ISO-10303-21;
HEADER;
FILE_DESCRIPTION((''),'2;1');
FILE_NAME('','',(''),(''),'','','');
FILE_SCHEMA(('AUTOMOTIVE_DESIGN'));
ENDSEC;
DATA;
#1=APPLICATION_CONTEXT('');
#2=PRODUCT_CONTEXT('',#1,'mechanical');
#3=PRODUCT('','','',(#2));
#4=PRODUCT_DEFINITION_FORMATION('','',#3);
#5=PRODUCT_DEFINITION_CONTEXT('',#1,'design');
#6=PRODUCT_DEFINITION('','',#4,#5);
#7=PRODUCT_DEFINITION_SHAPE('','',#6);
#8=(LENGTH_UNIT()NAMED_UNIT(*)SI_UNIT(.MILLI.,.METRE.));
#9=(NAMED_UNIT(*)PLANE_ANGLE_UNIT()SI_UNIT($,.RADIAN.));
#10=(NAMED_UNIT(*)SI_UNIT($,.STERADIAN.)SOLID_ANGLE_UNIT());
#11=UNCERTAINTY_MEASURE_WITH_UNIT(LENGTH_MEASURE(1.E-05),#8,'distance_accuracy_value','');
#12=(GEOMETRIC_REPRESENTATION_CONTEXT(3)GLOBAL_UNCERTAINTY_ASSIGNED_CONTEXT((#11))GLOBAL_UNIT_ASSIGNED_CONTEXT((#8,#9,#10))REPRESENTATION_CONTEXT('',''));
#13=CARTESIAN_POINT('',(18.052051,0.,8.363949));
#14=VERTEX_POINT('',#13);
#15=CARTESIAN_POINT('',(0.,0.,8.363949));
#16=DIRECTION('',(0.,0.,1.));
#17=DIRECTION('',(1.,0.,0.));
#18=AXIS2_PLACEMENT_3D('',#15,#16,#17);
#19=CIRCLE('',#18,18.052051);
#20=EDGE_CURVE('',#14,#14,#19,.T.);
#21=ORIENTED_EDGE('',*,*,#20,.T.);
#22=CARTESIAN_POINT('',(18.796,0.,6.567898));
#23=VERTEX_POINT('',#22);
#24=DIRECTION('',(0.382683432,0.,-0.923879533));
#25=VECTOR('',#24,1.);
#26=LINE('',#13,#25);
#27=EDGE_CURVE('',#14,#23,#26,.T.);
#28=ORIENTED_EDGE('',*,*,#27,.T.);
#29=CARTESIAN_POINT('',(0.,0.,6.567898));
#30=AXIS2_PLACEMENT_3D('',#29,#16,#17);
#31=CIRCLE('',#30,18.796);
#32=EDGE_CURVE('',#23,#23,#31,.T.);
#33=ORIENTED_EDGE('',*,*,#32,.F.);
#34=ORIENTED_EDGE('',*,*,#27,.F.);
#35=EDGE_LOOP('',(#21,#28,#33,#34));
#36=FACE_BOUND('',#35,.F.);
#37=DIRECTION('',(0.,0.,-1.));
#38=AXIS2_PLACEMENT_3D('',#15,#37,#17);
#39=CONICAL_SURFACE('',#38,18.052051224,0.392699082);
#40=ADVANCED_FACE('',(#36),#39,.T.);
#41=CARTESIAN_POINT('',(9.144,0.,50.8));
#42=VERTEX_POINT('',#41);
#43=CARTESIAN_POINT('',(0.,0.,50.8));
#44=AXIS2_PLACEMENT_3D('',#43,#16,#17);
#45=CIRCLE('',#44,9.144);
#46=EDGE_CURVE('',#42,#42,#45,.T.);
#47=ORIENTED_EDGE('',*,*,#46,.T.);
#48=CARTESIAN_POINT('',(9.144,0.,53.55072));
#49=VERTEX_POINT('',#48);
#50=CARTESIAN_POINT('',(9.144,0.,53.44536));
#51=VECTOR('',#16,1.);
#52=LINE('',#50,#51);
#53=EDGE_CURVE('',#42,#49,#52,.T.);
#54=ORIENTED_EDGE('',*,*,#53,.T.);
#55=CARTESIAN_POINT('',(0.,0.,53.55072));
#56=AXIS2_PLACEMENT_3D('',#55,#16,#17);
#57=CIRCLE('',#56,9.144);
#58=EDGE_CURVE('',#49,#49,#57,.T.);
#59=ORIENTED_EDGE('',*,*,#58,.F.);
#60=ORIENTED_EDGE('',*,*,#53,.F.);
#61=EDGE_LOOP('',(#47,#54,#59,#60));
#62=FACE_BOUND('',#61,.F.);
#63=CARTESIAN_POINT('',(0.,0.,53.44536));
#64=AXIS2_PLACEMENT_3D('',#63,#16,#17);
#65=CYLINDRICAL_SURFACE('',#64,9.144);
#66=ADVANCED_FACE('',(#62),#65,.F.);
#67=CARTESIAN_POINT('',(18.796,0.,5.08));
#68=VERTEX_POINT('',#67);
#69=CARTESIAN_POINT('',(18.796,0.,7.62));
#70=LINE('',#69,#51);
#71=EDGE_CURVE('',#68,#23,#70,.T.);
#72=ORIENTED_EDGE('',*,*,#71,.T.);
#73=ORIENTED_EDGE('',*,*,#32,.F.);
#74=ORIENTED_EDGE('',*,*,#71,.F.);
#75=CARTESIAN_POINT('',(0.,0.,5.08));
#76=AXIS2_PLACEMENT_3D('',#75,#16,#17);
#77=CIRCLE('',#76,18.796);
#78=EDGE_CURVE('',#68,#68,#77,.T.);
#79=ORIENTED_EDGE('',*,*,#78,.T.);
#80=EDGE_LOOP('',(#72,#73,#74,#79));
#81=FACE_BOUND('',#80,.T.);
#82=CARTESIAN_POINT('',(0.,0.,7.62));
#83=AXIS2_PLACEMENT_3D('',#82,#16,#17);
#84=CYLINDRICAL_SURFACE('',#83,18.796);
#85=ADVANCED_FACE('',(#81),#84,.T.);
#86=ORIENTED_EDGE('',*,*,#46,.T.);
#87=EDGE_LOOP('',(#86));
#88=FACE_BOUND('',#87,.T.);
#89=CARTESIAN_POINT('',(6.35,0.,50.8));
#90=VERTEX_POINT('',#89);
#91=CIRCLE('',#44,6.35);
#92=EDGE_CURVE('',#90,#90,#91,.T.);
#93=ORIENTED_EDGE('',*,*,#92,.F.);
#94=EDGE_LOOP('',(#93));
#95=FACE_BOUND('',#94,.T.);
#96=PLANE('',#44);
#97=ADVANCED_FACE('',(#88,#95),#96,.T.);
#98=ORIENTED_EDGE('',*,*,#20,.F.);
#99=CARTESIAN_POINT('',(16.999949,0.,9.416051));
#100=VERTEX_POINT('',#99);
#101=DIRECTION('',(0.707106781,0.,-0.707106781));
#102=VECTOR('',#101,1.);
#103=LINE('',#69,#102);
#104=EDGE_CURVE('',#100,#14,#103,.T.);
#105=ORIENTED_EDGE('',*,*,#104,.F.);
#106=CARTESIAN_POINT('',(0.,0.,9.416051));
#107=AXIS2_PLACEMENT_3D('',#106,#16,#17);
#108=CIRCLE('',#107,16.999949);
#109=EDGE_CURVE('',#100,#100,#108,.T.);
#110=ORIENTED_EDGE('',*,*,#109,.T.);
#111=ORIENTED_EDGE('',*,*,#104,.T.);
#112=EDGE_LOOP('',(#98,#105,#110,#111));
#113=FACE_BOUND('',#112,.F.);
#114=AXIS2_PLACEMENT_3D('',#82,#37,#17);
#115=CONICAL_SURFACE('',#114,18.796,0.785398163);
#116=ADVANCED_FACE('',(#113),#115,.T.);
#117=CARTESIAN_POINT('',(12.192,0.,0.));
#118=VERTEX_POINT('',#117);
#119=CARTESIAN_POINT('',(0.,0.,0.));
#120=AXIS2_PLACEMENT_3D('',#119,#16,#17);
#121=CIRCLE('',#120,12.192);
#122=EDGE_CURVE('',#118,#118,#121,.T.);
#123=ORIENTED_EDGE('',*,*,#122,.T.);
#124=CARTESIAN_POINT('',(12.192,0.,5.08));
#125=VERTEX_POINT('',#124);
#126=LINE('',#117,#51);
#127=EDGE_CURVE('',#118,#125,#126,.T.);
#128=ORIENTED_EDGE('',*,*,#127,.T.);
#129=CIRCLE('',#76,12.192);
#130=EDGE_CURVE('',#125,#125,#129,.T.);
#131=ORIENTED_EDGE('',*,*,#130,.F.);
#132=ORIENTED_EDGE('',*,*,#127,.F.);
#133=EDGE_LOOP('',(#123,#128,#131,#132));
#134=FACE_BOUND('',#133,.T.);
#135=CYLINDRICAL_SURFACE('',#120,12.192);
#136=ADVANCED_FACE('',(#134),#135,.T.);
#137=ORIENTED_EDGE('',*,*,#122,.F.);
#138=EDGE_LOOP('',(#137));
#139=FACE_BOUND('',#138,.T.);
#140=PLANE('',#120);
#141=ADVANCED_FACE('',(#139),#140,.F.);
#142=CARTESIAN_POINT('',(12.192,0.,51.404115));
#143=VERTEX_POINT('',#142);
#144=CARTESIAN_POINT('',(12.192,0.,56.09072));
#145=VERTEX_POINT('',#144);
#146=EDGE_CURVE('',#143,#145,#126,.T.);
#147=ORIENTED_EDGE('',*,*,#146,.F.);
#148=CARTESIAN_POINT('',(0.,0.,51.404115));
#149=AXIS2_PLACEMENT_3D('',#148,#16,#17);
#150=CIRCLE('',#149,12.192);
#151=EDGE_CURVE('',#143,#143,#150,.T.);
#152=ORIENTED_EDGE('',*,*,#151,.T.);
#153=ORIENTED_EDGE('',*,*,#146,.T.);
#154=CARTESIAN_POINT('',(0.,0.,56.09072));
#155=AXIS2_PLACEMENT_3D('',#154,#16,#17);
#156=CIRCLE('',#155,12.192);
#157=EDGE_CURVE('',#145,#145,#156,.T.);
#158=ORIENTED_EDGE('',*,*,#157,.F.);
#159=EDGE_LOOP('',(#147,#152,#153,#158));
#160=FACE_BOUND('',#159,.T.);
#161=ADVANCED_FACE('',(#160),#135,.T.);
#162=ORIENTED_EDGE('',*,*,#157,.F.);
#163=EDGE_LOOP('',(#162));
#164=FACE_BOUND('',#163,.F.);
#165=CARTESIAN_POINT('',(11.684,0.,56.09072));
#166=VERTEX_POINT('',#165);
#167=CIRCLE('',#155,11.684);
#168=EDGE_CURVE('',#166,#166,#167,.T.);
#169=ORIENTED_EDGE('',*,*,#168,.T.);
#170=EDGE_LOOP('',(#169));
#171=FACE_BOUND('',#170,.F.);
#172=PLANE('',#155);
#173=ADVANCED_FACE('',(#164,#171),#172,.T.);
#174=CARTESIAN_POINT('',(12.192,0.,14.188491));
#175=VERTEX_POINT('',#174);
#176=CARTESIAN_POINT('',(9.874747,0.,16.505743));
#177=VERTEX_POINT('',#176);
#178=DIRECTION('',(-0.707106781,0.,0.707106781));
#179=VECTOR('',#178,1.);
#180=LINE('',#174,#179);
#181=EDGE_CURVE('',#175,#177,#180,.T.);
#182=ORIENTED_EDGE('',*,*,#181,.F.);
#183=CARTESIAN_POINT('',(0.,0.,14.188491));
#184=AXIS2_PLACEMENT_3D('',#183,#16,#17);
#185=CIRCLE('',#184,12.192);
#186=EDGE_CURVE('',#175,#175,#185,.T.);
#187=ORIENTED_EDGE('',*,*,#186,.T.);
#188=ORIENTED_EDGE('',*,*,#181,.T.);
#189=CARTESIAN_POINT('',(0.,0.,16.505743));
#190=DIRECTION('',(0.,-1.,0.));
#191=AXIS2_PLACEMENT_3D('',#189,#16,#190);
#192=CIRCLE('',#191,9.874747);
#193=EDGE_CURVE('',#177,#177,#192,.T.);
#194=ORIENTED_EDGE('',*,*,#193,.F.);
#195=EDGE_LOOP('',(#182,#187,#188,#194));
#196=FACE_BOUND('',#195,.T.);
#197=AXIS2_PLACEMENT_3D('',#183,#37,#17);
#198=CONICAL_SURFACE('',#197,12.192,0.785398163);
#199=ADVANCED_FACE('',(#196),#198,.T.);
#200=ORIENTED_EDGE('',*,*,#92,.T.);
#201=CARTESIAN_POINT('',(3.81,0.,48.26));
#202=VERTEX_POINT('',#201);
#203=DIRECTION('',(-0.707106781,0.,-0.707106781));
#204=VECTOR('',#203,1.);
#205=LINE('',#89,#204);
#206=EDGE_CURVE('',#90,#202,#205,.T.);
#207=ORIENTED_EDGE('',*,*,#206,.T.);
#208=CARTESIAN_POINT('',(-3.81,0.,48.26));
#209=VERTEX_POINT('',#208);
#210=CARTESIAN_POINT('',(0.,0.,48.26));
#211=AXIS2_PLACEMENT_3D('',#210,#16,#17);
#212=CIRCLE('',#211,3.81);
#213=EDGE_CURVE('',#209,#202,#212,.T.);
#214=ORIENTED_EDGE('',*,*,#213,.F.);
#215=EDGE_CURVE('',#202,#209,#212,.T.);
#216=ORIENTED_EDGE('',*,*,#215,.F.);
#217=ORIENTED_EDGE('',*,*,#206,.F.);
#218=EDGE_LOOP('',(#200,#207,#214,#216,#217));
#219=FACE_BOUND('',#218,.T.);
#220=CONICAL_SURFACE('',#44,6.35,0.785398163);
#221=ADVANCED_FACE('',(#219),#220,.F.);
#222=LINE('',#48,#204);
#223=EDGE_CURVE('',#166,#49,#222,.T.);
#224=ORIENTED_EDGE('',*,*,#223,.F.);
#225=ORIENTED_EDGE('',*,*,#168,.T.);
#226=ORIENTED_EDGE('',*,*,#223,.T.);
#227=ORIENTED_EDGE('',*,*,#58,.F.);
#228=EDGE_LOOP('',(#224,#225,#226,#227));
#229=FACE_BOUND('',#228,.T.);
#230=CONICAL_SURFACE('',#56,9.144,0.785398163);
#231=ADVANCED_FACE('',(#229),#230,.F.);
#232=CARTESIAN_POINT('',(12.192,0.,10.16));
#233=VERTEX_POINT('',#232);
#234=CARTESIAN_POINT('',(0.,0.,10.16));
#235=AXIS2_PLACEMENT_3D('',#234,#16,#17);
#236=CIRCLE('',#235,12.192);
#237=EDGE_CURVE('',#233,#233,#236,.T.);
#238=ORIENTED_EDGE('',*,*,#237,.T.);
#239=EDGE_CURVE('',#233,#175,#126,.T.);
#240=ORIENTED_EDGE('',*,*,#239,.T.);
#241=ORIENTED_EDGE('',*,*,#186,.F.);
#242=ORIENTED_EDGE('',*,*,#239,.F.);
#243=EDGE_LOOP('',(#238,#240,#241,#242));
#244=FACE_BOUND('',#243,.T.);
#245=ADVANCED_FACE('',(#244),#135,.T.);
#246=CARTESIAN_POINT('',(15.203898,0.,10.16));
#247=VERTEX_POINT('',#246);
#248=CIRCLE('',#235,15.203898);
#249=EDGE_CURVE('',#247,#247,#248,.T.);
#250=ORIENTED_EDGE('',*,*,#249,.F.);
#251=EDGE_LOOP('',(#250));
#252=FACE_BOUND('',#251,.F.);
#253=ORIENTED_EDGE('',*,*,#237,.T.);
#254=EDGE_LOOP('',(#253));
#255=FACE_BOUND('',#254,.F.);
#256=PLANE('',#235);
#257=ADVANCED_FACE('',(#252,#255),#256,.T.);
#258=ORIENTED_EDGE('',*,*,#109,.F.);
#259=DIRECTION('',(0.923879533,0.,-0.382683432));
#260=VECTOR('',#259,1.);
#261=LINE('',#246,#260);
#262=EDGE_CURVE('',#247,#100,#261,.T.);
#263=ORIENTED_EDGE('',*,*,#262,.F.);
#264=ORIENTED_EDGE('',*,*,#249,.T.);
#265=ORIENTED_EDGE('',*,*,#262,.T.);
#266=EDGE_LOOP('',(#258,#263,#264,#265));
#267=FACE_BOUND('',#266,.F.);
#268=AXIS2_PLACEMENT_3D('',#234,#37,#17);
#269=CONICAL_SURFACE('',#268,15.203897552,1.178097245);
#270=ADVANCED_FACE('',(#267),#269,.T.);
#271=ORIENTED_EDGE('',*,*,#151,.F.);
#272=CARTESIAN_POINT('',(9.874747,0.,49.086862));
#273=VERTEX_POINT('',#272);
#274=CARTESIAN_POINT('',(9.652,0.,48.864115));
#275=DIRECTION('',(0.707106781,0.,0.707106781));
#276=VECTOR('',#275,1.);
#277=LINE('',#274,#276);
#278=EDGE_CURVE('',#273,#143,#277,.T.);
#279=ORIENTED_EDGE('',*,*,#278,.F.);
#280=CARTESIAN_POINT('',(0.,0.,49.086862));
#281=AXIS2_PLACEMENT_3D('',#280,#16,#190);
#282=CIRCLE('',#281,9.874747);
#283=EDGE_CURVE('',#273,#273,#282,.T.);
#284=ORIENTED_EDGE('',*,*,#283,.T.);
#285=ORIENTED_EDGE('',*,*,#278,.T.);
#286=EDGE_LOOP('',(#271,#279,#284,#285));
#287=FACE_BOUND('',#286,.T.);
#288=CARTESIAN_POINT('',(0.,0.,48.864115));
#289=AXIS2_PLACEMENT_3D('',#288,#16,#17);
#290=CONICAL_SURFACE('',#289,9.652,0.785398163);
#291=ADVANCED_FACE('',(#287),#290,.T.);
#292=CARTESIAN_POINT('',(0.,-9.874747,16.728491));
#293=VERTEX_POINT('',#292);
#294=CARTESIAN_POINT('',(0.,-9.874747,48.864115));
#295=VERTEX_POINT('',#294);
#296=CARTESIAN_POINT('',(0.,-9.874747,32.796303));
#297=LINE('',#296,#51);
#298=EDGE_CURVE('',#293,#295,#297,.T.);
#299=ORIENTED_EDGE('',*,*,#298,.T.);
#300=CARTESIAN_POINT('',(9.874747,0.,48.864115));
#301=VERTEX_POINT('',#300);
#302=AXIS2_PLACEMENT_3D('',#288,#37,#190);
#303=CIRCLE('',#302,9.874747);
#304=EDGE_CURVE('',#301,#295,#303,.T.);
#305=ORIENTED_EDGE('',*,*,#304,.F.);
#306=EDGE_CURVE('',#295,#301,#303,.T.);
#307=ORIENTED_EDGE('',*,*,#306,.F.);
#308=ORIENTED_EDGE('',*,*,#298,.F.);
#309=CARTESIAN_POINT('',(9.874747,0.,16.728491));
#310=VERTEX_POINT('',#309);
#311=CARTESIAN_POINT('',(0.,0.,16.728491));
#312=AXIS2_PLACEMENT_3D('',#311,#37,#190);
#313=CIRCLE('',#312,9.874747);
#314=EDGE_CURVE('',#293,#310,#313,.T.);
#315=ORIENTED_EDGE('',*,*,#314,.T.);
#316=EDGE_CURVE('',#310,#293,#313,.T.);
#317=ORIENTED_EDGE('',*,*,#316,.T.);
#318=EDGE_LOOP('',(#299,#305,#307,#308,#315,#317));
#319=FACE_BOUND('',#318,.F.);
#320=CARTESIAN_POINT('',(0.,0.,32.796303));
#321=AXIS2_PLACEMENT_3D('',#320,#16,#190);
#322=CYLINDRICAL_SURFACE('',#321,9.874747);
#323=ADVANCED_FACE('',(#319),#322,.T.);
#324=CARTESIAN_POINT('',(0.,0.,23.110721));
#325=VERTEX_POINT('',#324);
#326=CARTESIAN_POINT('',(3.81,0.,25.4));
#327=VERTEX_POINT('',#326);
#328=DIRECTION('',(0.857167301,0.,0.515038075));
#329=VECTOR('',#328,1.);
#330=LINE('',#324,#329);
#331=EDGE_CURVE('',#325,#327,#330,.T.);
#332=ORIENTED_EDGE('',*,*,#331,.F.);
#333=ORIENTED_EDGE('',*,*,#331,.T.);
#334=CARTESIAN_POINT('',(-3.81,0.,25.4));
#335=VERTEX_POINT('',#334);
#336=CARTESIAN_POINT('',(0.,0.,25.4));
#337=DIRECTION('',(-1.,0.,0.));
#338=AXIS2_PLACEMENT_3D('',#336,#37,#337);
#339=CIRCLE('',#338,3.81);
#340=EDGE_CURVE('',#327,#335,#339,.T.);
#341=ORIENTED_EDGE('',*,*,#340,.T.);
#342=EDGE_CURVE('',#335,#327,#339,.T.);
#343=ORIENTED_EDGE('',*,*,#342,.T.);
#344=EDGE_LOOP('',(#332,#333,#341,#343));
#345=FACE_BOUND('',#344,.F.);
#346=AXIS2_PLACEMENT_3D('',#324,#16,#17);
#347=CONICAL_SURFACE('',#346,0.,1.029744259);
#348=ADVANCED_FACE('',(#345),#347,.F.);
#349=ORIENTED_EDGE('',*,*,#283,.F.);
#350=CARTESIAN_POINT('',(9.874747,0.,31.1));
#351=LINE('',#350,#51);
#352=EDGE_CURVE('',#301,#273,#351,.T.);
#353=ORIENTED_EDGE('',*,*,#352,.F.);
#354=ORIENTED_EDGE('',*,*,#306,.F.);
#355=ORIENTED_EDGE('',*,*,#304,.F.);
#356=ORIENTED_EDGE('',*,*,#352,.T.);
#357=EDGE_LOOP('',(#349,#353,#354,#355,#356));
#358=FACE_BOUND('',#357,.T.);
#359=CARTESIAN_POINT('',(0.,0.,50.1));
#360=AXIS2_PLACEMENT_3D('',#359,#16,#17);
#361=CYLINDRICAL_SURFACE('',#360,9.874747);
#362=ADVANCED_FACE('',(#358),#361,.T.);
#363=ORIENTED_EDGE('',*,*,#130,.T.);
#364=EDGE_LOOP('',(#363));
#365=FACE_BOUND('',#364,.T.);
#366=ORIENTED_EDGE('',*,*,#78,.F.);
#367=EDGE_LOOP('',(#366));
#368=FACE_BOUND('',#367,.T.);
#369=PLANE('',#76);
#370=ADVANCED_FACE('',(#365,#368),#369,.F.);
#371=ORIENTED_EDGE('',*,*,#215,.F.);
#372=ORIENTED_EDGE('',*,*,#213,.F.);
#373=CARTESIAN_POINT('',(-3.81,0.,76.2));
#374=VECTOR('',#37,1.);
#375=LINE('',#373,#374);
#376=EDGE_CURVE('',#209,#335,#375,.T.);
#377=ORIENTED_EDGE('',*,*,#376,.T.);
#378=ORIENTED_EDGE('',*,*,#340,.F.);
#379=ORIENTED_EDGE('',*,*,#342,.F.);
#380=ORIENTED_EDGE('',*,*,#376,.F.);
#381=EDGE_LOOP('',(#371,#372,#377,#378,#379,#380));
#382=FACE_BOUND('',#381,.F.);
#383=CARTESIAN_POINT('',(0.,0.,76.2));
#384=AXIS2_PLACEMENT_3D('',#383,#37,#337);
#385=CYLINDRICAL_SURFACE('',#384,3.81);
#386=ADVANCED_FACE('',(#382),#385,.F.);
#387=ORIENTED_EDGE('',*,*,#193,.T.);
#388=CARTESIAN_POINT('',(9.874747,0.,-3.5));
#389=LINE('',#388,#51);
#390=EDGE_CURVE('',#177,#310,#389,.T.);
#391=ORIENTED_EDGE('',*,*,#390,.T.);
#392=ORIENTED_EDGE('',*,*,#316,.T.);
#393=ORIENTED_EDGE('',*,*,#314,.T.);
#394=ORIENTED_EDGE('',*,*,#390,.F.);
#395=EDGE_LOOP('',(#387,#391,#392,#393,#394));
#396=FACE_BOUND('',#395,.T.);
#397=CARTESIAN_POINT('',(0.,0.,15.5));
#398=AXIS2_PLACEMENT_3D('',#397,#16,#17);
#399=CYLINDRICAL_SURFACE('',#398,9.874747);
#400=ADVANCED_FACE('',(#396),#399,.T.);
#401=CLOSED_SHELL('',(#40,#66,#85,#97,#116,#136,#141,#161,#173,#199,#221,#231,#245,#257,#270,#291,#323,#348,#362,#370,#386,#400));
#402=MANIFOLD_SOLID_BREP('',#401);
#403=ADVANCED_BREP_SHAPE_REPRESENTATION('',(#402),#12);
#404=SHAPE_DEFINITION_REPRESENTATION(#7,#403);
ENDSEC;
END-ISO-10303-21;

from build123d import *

# Parameters (mm, degrees)
F0_W         = 6.096
F0_H         = 5.08
F0_W_2       = 3.048
F0_H_2       = 5.2907199979
F0_W_3       = 6.604
F2_SIZE      = 2.54
F3_SIZE      = 2.54
F5_D         = 7.62
F5_DEPTH     = 25.4
F5_TIP       = 2.2892789585
F6_W         = 7.272795774
F6_H         = 32.1356244385
F8_S5_R      = 9.8747471347
F8_T6_DEPTH  = 19
F8_S11_R     = 9.8747471347
F8_T12_DEPTH = 19


# Not quite as in the source:
# - a fillet or chamfer that OpenCascade refuses, or shapes differently, is made with other operations: its cross-section is extruded or revolved along the edge and cut away or added


with BuildPart() as f1:
    # F0 (on Front) → F1 (revolve)
    with BuildSketch(Plane.XZ):
        with Locations((9.144, 2.54)):
            Rectangle(F0_W, F0_H)
        Polygon((0, 50.8), (0, 47.4797748029), (6.096, 50.8), align=None)
        with Locations((9.144, 7.62)):
            Rectangle(F0_W, F0_H)
        with Locations((10.668, 53.4453599989)):
            Rectangle(F0_W_2, F0_H_2)
        Polygon((0, 47.4797748029), (0, 0), (6.096, 0), (6.096, 5.08), (6.096, 10.16), (12.192, 10.16), (12.192, 50.8), (9.144, 50.8), (6.096, 50.8), align=None)
        with Locations((15.494, 7.62)):
            Rectangle(F0_W_3, F0_H)
    revolve(axis=Axis((0, 0, 25.4), (0, 0, 1)))

    # F2
    f2_edges = [f1.edges().sort_by_distance(p)[0] for p in [
        (-9.144, 0, 56.09072),
    ]]
    chamfer(f2_edges, length=F2_SIZE)

    # F3
    f3_edges = [f1.edges().sort_by_distance(p)[0] for p in [
        (-18.796, 0, 10.16),
    ]]
    chamfer(f3_edges, length=F3_SIZE)

    # F5
    with Locations(Plane.XY.offset(50.8)):
        with Locations((0, 0)):
            Hole(F5_D / 2, depth=F5_DEPTH)
            with Locations((0, 0, -(F5_DEPTH + F5_TIP / 2))):  # 118° drill point
                Cone(0, F5_D / 2, F5_TIP, mode=Mode.SUBTRACT)

    # F6 (on Right) → F7 (revolve, cut)
    with BuildSketch(Plane.YZ):
        with Locations((-13.5111450218, 32.7963028103)):
            Rectangle(F6_W, F6_H)
    revolve(axis=Axis((0, 0, 32.7963028103), (0, 0, -1)), mode=Mode.SUBTRACT)

    # F8: chamfer of 2.54 on 5 edges, made by hand


with BuildPart() as f8_tool2:
    # F8_s3 → F8_t4 (revolve)
    with BuildSketch(Plane.XZ):
        Polygon((9.652, 48.8641150296), (12.192, 51.4041150296), (12.192, 48.8641150296), align=None)
    revolve(axis=Axis((0, 0, 48.8641150296), (0, 0, 1)))

    # F8_s5 → F8_t6 (cut, symmetric)
    with BuildSketch(Plane.XY.offset(50.1)):
        Circle(F8_S5_R)
    extrude(amount=F8_T6_DEPTH, both=True, mode=Mode.SUBTRACT)


with BuildPart() as f1_1:
    add(f1.part)

    # F8_t1: cut F8_tool2
    add(f8_tool2.part, mode=Mode.SUBTRACT)


with BuildPart() as f8_tool8:
    # F8_s9 → F8_t10 (revolve)
    with BuildSketch(Plane.XZ):
        Polygon((12.192, 14.188490591), (9.652, 16.728490591), (12.192, 16.728490591), align=None)
    revolve(axis=Axis((0, 0, 16.728490591), (0, 0, 1)))

    # F8_s11 → F8_t12 (cut, symmetric)
    with BuildSketch(Plane.XY.offset(15.5)):
        Circle(F8_S11_R)
    extrude(amount=F8_T12_DEPTH, both=True, mode=Mode.SUBTRACT)


with BuildPart() as f1_2:
    add(f1_1.part)

    # F8_t7: cut F8_tool8
    add(f8_tool8.part, mode=Mode.SUBTRACT)

    # F8_s13 → F8_t14 (revolve, cut)
    with BuildSketch(Plane.XZ):
        Polygon((15.2038975516, 10.16), (16.9999487758, 9.4160512242), (16.256, 10.16), align=None)
    revolve(axis=Axis((0, 0, 10.16), (0, 0, 1)), mode=Mode.SUBTRACT)

    # F8_s15 → F8_t16 (revolve, cut)
    with BuildSketch(Plane.XZ):
        Polygon((18.0520512242, 8.3639487758), (18.796, 6.5678975516), (18.796, 7.62), align=None)
    revolve(axis=Axis((0, 0, 7.62), (0, 0, 1)), mode=Mode.SUBTRACT)

    # F8_s17 → F8_t18 (revolve, cut)
    with BuildSketch(Plane.XZ):
        Polygon((6.35, 50.8), (3.81, 48.26), (3.81, 50.8), align=None)
    revolve(axis=Axis((0, 0, 50.8), (0, 0, 1)), mode=Mode.SUBTRACT)


solid = f1_2.part
